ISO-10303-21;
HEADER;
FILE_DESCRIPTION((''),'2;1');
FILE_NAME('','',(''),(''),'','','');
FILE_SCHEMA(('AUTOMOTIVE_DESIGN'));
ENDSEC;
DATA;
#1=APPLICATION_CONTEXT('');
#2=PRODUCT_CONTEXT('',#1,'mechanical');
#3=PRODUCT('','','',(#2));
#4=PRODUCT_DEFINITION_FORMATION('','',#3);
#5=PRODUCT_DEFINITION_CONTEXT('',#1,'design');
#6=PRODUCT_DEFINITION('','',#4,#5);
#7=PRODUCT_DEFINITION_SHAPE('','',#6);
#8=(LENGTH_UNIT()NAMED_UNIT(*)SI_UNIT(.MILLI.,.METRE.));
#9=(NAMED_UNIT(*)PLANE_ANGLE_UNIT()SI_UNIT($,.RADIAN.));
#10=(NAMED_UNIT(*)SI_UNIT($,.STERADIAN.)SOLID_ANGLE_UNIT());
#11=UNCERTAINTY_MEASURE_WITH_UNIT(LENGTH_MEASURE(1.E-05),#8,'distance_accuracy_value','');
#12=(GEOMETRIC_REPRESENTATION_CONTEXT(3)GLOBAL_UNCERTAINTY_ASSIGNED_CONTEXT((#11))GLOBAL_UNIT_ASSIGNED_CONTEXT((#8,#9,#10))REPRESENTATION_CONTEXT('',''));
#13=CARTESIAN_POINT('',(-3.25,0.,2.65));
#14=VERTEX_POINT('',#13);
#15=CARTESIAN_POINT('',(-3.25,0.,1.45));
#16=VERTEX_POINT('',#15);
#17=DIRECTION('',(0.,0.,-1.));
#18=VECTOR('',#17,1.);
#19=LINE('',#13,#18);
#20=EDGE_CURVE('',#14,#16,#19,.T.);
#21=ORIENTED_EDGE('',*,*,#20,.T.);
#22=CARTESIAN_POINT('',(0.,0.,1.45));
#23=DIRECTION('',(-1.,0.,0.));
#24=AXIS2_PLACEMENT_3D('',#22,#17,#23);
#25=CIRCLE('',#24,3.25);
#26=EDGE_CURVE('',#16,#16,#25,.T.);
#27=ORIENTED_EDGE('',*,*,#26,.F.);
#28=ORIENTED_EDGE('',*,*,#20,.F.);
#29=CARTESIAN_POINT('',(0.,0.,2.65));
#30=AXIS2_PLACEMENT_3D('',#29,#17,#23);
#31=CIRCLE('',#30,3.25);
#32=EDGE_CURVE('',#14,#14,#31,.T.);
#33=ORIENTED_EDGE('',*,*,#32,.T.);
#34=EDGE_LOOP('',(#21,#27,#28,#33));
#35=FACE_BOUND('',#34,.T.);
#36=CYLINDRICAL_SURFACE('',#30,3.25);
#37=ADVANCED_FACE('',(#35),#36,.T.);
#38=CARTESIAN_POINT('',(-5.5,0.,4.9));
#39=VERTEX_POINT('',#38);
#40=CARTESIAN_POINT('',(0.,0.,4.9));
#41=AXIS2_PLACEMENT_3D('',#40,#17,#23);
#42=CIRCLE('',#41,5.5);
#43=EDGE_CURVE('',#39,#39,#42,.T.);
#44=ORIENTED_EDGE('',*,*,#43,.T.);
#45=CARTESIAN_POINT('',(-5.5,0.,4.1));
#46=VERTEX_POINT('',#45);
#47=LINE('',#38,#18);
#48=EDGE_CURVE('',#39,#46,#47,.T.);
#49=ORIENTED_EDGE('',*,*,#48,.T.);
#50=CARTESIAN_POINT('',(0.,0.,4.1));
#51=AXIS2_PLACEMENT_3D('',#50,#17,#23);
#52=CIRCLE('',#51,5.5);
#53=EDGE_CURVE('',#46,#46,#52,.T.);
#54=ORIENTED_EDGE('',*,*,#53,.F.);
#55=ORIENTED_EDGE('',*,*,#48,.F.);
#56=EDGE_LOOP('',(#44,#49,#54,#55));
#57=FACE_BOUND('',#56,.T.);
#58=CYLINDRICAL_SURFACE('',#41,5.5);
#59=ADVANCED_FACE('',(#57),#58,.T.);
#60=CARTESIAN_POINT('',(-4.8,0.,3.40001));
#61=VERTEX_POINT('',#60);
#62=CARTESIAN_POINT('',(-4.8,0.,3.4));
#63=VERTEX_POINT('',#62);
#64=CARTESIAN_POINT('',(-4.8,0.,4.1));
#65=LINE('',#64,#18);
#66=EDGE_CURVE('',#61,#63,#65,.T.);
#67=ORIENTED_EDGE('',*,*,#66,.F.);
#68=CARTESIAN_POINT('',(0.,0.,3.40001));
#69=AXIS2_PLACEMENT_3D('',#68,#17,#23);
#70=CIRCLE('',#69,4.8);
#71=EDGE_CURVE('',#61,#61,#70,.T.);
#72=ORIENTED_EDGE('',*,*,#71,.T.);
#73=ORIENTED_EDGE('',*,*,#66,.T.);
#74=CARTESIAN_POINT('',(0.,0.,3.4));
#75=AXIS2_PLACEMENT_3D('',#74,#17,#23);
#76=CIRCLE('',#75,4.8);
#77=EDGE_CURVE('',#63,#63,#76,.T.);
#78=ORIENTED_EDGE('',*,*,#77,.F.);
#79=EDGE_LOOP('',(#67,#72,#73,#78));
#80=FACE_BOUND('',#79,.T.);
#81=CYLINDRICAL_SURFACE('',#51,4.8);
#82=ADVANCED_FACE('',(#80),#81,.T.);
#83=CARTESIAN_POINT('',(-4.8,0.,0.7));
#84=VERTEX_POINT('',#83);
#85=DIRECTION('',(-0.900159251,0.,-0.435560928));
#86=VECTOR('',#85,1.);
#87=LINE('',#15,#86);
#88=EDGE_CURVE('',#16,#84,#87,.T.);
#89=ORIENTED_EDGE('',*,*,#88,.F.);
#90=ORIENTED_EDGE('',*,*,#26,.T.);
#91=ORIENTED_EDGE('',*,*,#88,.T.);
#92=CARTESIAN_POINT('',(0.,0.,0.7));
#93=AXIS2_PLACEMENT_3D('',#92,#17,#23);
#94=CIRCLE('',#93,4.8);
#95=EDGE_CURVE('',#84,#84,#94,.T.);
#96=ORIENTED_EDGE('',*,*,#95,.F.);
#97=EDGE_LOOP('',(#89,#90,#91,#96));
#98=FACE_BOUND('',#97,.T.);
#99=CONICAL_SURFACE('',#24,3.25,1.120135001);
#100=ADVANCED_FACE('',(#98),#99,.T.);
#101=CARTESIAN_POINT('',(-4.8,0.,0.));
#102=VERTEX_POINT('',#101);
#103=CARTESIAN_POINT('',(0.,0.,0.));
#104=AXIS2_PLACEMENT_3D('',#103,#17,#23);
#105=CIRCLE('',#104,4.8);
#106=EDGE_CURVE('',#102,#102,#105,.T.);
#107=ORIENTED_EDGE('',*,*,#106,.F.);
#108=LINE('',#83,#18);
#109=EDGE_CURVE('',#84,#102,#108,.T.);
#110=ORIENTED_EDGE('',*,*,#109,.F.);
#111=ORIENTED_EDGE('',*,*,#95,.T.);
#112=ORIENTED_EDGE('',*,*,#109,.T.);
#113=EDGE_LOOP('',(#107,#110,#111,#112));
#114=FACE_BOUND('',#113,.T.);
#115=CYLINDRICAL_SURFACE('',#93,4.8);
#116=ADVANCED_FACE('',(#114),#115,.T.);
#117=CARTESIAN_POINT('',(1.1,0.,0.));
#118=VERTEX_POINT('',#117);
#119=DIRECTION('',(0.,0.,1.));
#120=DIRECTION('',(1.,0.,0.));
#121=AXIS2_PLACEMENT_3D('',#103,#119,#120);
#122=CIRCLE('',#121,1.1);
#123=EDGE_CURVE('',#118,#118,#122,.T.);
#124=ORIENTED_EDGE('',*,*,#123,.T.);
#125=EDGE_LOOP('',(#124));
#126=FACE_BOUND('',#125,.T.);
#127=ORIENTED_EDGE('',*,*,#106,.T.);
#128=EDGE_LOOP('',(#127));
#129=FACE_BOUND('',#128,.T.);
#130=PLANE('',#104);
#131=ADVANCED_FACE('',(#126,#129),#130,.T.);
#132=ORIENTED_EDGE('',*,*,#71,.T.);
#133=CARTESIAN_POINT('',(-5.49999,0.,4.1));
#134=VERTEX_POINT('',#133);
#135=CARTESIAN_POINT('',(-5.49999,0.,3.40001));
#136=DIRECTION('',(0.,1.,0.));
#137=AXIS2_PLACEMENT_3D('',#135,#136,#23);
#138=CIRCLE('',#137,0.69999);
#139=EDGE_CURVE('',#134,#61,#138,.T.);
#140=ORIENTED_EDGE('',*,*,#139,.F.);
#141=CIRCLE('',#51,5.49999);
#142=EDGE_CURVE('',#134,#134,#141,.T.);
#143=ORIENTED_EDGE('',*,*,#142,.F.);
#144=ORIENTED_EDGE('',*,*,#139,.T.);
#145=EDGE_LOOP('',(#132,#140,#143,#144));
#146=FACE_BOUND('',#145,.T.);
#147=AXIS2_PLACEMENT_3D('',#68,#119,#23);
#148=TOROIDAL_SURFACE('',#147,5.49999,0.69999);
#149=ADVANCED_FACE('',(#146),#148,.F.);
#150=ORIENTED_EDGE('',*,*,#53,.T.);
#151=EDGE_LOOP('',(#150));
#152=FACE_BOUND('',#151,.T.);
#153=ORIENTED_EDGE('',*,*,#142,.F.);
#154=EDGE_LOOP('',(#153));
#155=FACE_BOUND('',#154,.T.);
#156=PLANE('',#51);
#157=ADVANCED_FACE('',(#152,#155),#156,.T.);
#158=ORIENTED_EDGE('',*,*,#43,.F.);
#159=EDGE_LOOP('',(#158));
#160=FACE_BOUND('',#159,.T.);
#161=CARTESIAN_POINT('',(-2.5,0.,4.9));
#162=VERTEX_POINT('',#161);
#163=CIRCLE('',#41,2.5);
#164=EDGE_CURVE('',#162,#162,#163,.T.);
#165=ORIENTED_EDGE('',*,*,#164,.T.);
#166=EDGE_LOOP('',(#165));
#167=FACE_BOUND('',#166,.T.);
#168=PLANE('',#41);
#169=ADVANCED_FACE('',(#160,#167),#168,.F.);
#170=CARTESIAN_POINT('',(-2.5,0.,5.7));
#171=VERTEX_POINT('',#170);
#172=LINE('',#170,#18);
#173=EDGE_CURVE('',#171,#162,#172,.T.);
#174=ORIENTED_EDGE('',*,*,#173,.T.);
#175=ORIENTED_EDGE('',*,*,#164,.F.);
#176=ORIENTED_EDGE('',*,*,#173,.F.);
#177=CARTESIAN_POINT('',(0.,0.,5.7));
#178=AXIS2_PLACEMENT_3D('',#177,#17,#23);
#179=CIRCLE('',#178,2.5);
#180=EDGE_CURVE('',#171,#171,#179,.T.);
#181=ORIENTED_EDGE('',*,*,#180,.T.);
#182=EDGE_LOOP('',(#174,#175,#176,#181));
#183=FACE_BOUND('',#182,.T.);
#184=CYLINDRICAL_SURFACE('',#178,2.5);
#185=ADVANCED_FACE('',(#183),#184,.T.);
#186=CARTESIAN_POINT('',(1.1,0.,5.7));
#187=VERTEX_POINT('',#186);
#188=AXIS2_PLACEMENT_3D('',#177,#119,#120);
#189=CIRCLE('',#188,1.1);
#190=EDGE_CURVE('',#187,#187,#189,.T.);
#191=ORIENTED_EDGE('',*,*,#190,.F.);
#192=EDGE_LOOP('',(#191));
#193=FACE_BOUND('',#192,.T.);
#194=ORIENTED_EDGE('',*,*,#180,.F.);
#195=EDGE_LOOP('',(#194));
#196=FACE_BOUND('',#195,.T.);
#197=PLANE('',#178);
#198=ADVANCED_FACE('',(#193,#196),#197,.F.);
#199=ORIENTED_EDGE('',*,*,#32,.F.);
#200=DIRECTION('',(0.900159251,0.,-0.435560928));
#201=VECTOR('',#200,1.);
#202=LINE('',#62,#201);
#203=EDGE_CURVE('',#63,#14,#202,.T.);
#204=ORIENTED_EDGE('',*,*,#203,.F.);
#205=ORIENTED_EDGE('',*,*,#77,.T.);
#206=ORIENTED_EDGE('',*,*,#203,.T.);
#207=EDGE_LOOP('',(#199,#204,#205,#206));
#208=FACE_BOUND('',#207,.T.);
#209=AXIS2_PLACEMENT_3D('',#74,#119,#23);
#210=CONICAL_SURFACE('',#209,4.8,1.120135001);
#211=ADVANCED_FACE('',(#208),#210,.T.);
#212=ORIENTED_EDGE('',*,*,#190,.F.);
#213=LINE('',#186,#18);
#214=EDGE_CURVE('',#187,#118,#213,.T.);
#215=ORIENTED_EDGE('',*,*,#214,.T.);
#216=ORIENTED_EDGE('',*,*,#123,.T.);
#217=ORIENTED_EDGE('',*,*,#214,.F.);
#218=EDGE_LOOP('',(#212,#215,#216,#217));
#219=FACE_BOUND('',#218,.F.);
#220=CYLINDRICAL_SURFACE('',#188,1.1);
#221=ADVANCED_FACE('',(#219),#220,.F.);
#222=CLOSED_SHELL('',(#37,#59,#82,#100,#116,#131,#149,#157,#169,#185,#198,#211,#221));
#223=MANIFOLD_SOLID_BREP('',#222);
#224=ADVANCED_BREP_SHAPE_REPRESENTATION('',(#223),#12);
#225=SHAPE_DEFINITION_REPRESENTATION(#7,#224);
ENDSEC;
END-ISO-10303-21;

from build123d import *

# Parameters (mm, degrees)
F2_R     = 0.69999
F3_R     = 1.1
F4_DEPTH = 5.701


# Not quite as in the source:
# - a fillet or chamfer is up to 0.001 mm smaller than in the source, because OpenCascade refuses the exact size


with BuildPart() as f1:
    # F0 (on Front) → F1 (revolve)
    with BuildSketch(Plane.XZ):
        Polygon((-4.8, 0), (0, 0), (0, 5.7), (-2.5, 5.7), (-2.5, 4.9), (-5.5, 4.9), (-5.5, 4.1), (-4.8, 4.1), (-4.8, 3.4), (-3.25, 2.65), (-3.25, 1.45), (-4.8, 0.7), align=None)
    revolve(axis=Axis((0, 0, 2.85), (0, 0, -1)))

    # F2 (radius 0.7 in the source; OpenCascade refuses exactly that, so slightly less here)
    f2_edges = [f1.edges().sort_by_distance(p)[0] for p in [
        (4.8, 0, 4.1),
    ]]
    fillet(f2_edges, radius=F2_R)

    # F3 (on face) → F4 (cut, through all)
    with BuildSketch(Plane.XY.offset(5.7)):
        Circle(F3_R)
    extrude(amount=-F4_DEPTH, mode=Mode.SUBTRACT)


solid = f1.part
